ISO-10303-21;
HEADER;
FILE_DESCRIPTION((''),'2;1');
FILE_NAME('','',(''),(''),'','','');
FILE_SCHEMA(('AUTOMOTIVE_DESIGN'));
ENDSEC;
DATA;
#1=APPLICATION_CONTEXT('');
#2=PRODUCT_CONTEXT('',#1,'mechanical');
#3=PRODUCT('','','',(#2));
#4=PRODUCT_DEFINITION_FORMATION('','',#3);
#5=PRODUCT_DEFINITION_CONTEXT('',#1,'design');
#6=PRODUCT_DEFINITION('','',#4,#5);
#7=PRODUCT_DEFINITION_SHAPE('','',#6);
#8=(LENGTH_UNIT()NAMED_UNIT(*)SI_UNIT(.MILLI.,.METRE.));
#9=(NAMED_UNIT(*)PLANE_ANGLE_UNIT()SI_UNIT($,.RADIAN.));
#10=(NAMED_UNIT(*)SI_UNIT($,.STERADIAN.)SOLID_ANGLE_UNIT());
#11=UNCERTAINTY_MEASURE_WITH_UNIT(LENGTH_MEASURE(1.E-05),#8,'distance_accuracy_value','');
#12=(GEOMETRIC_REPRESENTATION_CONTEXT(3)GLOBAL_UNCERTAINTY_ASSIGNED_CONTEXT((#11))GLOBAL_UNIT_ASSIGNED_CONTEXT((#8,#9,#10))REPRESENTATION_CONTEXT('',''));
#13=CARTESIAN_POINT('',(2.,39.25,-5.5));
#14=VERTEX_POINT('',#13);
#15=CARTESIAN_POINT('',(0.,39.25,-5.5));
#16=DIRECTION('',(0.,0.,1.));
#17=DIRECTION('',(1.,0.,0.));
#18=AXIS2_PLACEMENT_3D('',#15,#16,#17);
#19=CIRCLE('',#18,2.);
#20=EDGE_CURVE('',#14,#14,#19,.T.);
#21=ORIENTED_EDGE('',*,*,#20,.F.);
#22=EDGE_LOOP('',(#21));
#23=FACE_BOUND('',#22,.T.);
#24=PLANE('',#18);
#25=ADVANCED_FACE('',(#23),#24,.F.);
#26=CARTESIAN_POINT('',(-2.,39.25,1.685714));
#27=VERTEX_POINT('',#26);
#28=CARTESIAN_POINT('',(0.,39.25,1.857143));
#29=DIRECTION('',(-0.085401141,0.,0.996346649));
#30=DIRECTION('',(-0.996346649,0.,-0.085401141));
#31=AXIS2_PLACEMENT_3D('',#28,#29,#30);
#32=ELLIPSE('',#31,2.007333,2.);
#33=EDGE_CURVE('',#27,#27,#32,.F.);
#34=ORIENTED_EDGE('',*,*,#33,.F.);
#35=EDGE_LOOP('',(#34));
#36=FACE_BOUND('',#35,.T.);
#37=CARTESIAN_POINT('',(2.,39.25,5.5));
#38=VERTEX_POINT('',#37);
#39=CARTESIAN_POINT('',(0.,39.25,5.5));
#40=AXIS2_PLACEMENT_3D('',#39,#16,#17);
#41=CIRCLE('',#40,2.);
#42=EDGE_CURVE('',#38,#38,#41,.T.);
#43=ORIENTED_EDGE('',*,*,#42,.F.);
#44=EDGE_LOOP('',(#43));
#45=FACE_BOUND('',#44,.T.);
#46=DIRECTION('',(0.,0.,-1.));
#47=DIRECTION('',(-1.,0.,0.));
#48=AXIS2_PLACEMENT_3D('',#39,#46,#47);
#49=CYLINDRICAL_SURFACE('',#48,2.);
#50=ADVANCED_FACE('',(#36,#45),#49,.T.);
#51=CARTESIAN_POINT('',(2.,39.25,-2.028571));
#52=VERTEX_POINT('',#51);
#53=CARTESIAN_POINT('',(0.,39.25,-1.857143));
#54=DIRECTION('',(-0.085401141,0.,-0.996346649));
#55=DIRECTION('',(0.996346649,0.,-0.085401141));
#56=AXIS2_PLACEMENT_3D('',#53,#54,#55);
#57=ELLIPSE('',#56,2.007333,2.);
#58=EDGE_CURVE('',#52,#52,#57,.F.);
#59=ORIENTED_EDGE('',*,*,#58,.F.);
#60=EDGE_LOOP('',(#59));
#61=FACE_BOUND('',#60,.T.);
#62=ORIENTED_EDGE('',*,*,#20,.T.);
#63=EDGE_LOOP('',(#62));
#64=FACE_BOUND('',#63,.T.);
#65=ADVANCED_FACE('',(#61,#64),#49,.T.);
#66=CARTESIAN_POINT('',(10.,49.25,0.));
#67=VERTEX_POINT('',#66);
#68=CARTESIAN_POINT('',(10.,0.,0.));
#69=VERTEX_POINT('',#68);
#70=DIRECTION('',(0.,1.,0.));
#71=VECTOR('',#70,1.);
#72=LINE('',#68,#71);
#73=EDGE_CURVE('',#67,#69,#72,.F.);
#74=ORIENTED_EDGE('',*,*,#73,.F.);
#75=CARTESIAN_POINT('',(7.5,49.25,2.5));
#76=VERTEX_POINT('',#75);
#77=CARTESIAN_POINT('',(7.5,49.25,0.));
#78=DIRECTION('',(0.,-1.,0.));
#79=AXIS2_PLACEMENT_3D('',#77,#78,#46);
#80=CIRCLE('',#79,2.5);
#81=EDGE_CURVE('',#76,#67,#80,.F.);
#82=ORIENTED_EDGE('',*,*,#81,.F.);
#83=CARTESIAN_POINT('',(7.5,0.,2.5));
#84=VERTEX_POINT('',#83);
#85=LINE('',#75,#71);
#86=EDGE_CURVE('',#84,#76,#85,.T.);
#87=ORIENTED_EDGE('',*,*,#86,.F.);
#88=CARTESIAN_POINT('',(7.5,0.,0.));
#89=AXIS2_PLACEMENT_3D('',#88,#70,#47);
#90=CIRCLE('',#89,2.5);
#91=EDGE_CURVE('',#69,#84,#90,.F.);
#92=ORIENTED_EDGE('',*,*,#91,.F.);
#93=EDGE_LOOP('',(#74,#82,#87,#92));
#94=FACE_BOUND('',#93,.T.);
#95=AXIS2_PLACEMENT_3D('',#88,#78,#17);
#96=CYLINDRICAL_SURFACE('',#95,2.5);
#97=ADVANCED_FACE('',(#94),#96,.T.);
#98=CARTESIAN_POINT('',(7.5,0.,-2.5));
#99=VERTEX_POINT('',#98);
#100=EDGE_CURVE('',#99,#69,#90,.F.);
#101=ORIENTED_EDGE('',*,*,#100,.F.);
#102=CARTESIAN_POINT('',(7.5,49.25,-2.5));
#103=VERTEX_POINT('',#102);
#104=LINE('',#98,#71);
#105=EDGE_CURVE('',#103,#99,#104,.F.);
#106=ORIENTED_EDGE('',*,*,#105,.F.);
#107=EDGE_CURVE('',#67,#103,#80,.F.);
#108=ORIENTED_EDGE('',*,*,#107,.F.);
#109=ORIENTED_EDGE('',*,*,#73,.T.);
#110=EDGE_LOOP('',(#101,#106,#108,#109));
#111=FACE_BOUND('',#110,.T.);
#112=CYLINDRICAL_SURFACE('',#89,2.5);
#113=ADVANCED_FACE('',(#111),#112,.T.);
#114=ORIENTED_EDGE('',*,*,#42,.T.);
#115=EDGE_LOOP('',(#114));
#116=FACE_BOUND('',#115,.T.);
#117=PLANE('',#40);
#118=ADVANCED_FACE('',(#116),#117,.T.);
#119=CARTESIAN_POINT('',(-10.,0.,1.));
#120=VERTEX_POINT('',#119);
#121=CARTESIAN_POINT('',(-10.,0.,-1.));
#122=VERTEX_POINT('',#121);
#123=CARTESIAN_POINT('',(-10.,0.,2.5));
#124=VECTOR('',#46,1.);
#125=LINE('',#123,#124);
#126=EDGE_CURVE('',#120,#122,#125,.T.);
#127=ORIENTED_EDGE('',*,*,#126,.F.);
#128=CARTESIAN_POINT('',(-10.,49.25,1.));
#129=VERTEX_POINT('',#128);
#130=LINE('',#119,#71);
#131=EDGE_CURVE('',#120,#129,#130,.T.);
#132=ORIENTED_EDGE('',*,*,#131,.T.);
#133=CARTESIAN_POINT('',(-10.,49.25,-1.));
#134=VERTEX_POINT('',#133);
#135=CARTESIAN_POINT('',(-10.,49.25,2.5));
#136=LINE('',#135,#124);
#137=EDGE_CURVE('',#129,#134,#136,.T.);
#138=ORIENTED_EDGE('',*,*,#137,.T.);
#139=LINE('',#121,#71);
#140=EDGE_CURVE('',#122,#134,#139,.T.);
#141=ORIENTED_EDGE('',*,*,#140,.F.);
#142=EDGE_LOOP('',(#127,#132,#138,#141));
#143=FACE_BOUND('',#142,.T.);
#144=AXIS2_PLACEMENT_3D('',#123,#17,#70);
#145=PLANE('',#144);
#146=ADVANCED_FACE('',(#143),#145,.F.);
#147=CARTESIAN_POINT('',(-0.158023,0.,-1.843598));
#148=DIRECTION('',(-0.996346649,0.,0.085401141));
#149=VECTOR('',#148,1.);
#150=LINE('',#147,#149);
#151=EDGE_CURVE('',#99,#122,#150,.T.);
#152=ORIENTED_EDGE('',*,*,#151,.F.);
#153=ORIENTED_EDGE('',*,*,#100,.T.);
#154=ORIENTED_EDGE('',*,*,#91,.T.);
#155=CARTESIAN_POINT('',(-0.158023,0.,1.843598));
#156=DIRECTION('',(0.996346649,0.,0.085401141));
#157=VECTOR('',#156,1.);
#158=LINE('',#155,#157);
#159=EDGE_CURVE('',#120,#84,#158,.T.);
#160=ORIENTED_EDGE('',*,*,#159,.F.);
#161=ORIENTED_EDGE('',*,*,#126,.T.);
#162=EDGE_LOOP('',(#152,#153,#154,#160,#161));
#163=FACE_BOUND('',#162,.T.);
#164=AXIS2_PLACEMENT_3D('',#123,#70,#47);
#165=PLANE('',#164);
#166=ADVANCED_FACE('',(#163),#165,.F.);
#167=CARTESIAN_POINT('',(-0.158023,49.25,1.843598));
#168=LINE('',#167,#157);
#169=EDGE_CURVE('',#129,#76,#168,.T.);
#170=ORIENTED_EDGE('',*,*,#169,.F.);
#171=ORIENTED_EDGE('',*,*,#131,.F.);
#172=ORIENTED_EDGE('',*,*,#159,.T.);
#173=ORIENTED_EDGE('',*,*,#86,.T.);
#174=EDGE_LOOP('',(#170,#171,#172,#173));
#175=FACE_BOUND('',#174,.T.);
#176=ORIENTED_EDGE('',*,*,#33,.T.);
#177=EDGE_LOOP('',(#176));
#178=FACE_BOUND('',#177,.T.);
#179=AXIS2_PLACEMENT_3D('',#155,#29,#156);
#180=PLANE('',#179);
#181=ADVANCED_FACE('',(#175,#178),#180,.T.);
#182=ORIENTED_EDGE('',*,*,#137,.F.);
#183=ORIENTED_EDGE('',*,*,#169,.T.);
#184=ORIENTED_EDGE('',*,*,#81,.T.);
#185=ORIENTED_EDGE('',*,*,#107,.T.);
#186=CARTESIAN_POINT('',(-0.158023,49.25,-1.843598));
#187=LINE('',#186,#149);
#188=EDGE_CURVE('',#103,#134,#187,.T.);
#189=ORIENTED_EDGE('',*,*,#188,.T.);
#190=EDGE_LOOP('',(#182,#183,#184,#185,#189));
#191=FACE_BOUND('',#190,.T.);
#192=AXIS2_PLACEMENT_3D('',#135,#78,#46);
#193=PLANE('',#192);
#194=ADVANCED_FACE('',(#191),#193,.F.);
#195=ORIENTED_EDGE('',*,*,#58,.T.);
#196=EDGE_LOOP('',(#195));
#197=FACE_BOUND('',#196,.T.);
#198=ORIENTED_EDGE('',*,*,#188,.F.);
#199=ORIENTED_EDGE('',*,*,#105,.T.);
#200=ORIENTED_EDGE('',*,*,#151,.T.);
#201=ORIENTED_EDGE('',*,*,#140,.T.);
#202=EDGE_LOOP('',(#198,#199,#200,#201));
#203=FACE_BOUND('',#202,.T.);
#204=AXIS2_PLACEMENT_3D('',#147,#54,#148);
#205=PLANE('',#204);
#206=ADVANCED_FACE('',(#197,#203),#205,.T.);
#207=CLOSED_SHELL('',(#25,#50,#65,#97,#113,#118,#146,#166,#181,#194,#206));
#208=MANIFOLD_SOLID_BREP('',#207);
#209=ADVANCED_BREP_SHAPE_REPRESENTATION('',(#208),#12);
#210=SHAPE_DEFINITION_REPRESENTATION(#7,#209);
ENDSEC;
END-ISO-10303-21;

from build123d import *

# Parameters (mm, degrees)
SKETCH1_W           = 20
SKETCH1_H           = 49.25
BOSS_EXTRUDE1_DEPTH = 2.5
FILLET3_R           = 2.5
CUT_EXTRUDE1_DEPTH  = 51.317119353
SKETCH14_R          = 2
BOSS_EXTRUDE2_DEPTH = 5.5


with BuildPart() as part:
    # Sketch1 → Boss-Extrude1 (new, symmetric)
    with BuildSketch(Plane.XY):
        with Locations((0, 24.625)):
            Rectangle(SKETCH1_W, SKETCH1_H)
    extrude(amount=BOSS_EXTRUDE1_DEPTH, both=True)

    # Fillet3
    fillet3_edges = [part.edges().sort_by_distance(p)[0] for p in [
        (10, 24.625, 2.5),
        (10, 24.625, -2.5),
    ]]
    fillet(fillet3_edges, radius=FILLET3_R - 0.0001)  # a hair under: the kernel refuses the full size

    # Sketch11 → Cut-Extrude1 (cut, through all)
    with BuildSketch(Plane(origin=(0, 49.25, 0), x_dir=(1, 0, 0), z_dir=(0, 1, 0))):
        Polygon((-10, 1), (7.5, 2.5), (-10, 2.5), align=None)
        Polygon((7.5, -2.5), (-10, -1), (-10, -2.5), align=None)
    extrude(amount=-CUT_EXTRUDE1_DEPTH, mode=Mode.SUBTRACT)

    # Sketch14 → Boss-Extrude2 (add, symmetric)
    with BuildSketch(Plane.XY):
        with Locations((0, 39.25)):
            Circle(SKETCH14_R)
    extrude(amount=BOSS_EXTRUDE2_DEPTH, both=True)


solid = part.part
